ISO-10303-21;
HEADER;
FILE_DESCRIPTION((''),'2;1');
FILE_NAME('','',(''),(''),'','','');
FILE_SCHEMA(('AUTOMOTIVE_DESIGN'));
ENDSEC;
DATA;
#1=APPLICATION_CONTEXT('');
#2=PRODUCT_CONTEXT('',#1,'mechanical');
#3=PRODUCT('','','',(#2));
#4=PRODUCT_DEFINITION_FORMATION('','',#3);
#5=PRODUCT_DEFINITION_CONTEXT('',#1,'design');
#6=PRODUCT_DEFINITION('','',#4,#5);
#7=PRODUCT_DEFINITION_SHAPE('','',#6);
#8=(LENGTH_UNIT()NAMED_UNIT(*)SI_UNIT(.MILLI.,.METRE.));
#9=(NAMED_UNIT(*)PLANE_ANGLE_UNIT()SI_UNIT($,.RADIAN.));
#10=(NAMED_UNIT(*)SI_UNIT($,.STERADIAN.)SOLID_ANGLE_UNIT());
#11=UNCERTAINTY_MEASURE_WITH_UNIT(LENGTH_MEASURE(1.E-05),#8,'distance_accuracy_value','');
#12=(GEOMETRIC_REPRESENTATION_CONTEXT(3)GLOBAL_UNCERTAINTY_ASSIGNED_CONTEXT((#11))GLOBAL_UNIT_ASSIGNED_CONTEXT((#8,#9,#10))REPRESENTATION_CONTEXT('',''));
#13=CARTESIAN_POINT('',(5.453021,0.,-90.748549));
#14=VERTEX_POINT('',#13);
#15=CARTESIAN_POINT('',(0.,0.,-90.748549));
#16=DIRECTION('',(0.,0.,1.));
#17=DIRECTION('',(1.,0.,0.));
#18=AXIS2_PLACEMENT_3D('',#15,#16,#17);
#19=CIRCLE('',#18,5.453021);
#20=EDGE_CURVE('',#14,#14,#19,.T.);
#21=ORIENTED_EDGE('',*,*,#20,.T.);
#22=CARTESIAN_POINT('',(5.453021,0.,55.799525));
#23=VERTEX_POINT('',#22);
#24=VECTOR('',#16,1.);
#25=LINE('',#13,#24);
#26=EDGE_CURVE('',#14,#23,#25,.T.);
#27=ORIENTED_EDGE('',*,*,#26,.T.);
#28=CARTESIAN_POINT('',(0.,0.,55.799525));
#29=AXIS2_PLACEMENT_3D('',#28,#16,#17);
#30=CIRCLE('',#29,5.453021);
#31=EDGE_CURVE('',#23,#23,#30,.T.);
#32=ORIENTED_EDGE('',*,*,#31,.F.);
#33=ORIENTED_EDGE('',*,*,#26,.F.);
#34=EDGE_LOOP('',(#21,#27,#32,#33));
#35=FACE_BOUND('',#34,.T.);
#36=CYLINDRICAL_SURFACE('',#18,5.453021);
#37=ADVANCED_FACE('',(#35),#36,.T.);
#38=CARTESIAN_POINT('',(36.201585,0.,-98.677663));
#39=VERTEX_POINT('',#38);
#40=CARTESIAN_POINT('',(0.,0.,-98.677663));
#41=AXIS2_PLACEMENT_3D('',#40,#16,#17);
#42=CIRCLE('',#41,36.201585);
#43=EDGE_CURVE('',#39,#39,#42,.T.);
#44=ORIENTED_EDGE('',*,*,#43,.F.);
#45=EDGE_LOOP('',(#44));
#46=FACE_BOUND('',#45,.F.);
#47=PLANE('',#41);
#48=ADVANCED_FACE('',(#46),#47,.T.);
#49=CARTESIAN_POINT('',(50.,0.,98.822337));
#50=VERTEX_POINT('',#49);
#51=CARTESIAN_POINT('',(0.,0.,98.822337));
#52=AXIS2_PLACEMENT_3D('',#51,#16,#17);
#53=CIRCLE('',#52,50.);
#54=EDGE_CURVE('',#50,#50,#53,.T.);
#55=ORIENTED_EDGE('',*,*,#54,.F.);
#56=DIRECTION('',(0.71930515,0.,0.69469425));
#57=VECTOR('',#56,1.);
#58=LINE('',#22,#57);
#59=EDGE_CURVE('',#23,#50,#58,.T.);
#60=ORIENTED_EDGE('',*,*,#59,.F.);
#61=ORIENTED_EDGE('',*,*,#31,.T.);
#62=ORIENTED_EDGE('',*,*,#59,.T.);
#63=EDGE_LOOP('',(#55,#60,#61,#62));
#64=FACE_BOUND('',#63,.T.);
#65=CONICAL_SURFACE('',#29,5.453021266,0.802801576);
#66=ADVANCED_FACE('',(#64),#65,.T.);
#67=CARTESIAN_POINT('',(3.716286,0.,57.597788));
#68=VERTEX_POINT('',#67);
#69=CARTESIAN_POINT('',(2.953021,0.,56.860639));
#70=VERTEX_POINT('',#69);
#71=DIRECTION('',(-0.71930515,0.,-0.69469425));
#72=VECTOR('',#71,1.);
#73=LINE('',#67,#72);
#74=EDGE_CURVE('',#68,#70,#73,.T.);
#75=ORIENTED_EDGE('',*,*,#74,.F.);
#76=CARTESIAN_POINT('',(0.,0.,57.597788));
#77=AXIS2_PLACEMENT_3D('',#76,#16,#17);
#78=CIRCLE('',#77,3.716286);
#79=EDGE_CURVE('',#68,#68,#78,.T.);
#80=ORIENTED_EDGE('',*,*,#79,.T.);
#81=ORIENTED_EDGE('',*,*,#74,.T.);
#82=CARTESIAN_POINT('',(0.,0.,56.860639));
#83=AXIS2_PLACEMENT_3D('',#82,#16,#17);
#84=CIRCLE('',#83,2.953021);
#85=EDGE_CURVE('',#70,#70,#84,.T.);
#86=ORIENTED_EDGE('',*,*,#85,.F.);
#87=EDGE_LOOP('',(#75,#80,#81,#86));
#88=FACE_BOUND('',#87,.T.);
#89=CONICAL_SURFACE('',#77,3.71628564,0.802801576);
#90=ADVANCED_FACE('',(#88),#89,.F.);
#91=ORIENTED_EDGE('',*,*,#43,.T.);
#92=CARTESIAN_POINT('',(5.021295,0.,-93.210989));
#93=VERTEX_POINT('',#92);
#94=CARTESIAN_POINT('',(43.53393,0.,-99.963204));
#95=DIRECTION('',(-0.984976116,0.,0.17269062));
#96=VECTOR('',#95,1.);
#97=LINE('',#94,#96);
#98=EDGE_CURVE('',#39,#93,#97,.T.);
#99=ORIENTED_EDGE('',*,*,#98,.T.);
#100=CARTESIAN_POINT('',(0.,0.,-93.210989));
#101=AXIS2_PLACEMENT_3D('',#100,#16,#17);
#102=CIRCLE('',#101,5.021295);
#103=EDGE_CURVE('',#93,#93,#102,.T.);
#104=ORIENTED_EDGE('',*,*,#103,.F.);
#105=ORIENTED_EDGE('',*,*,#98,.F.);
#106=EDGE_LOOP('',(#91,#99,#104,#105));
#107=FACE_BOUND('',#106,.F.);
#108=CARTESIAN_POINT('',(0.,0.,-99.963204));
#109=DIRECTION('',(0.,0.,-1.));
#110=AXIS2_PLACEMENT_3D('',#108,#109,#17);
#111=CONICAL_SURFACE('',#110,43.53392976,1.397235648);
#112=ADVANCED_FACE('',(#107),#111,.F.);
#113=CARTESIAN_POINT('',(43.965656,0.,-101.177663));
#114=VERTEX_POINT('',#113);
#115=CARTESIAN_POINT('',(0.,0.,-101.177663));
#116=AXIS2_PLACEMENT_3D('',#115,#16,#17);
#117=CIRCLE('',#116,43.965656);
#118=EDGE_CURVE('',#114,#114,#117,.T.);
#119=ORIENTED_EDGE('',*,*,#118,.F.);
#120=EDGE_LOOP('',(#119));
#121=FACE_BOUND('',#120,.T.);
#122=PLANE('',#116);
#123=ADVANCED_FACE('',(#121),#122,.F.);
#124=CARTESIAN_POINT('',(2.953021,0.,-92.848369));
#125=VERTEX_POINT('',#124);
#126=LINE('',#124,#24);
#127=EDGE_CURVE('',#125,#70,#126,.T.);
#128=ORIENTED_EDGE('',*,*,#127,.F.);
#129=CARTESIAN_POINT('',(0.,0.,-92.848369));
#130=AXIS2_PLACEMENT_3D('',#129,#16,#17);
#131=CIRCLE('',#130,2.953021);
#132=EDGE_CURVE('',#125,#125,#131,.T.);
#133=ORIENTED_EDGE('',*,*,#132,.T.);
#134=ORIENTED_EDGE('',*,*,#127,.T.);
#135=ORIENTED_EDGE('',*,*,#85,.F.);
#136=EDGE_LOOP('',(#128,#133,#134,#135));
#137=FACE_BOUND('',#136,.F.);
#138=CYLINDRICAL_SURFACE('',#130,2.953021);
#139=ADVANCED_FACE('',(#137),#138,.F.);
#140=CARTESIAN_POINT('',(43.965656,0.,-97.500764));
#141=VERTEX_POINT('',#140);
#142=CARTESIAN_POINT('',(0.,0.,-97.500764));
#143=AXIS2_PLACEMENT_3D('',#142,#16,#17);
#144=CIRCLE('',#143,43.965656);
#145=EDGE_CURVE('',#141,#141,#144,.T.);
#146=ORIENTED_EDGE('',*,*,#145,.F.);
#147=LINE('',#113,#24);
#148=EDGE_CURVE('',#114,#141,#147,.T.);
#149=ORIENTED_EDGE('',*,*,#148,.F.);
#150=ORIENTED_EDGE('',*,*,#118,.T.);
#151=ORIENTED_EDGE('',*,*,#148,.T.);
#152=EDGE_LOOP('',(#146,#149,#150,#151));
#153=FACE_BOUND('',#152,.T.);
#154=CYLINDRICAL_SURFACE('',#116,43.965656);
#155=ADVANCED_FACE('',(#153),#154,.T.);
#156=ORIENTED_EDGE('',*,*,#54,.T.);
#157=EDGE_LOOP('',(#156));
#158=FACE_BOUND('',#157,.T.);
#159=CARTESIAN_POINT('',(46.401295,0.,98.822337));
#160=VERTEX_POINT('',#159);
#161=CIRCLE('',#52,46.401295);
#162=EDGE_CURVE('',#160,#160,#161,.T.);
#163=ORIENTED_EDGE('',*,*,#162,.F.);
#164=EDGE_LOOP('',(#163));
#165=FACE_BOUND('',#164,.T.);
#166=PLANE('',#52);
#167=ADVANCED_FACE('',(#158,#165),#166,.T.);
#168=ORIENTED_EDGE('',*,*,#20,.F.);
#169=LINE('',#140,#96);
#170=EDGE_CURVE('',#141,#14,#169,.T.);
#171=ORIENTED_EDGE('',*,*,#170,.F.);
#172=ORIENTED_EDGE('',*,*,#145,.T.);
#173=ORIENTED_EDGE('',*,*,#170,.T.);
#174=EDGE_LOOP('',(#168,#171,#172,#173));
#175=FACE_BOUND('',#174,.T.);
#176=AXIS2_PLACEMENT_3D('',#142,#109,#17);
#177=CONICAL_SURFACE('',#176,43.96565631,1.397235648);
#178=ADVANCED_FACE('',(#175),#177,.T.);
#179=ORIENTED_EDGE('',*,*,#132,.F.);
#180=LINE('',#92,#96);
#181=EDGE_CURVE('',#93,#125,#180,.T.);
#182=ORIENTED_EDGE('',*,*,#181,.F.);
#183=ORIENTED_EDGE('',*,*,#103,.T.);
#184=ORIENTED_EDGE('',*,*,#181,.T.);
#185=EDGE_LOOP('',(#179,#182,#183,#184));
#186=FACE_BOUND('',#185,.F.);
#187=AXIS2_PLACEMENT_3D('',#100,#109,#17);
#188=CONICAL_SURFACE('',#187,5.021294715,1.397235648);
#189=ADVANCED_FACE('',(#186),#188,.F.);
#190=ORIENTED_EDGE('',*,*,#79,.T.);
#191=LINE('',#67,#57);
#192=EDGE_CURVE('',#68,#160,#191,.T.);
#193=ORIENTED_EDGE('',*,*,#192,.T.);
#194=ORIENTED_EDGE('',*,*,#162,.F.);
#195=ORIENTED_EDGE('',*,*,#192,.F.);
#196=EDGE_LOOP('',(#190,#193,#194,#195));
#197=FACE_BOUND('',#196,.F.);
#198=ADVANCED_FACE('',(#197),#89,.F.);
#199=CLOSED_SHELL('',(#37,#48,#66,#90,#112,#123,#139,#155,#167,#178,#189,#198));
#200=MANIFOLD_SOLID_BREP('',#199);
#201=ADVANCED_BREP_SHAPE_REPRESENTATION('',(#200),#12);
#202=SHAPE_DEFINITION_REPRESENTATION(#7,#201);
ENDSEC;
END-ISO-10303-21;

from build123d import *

# Parameters (mm, degrees)
F2_T = 2.5


# Not quite as in the source:
# - a shell that OpenCascade refuses in one call is made with other operations: the cavity is built on its own and cut out


with BuildPart() as f1:
    # F0 (on Front) → F1 (revolve)
    with BuildSketch(Plane.XZ):
        Polygon((0, 98.8223368999), (0, -101.1776631001), (43.9656563103, -101.1776631001), (43.9656563103, -97.5007638335), (5.4530212656, -90.7485485077), (5.4530212656, 55.7995252311), (50, 98.8223368999), align=None)
    revolve(axis=Axis((0, 0, -1.1776631001), (0, 0, 1)))

    # F2: shell of thickness 2.5, made by hand


with BuildPart() as f2_core1:
    # F2_t2: copy of F1
    add(f1.part)

    # the walls: a layer under each face that stays
    f2_faces = [f2_core1.faces().sort_by_distance(p)[0] for p in [
        (-27.7265106328, 0, 77.3109310655),
        (0, 0, -101.1776631001),
        (-43.9656563103, 0, -99.3392134668),
        (-24.7093387879, 0, -94.1246561706),
        (-5.4530212656, 0, -17.4745116383),
    ]]
    thicken(f2_faces, amount=-F2_T, mode=Mode.SUBTRACT)

    # F2_s3 → F2_t4 (revolve, cut)
    with BuildSketch(Plane.XZ):
        Polygon((5.4953886218, 55.7815426024), (3.7162856398, 57.5977881058), (2.9530212656, 56.8606386882), (2.9530212656, 55.7995252311), align=None)
    revolve(axis=Axis((0, 0, 55.7995252311), (0, 0, 1)), mode=Mode.SUBTRACT)

    # F2_s5 → F2_t6 (revolve, cut)
    with BuildSketch(Plane.XZ):
        Polygon((5.4823385311, -90.7239241048), (5.0212947153, -93.2109887985), (2.9530212656, -92.8483694226), (2.9530212656, -90.7485485077), align=None)
    revolve(axis=Axis((0, 0, -90.7485485077), (0, 0, 1)), mode=Mode.SUBTRACT)


with BuildPart() as f1_1:
    add(f1.part)

    # what is left inside the walls is the cavity
    f2_cavity = [f2_core1.part.solids().sort_by_distance(p)[0] for p in [
        (-17.927255, 0, 71.357287),
    ]]
    add(f2_cavity, mode=Mode.SUBTRACT)


solid = f1_1.part
